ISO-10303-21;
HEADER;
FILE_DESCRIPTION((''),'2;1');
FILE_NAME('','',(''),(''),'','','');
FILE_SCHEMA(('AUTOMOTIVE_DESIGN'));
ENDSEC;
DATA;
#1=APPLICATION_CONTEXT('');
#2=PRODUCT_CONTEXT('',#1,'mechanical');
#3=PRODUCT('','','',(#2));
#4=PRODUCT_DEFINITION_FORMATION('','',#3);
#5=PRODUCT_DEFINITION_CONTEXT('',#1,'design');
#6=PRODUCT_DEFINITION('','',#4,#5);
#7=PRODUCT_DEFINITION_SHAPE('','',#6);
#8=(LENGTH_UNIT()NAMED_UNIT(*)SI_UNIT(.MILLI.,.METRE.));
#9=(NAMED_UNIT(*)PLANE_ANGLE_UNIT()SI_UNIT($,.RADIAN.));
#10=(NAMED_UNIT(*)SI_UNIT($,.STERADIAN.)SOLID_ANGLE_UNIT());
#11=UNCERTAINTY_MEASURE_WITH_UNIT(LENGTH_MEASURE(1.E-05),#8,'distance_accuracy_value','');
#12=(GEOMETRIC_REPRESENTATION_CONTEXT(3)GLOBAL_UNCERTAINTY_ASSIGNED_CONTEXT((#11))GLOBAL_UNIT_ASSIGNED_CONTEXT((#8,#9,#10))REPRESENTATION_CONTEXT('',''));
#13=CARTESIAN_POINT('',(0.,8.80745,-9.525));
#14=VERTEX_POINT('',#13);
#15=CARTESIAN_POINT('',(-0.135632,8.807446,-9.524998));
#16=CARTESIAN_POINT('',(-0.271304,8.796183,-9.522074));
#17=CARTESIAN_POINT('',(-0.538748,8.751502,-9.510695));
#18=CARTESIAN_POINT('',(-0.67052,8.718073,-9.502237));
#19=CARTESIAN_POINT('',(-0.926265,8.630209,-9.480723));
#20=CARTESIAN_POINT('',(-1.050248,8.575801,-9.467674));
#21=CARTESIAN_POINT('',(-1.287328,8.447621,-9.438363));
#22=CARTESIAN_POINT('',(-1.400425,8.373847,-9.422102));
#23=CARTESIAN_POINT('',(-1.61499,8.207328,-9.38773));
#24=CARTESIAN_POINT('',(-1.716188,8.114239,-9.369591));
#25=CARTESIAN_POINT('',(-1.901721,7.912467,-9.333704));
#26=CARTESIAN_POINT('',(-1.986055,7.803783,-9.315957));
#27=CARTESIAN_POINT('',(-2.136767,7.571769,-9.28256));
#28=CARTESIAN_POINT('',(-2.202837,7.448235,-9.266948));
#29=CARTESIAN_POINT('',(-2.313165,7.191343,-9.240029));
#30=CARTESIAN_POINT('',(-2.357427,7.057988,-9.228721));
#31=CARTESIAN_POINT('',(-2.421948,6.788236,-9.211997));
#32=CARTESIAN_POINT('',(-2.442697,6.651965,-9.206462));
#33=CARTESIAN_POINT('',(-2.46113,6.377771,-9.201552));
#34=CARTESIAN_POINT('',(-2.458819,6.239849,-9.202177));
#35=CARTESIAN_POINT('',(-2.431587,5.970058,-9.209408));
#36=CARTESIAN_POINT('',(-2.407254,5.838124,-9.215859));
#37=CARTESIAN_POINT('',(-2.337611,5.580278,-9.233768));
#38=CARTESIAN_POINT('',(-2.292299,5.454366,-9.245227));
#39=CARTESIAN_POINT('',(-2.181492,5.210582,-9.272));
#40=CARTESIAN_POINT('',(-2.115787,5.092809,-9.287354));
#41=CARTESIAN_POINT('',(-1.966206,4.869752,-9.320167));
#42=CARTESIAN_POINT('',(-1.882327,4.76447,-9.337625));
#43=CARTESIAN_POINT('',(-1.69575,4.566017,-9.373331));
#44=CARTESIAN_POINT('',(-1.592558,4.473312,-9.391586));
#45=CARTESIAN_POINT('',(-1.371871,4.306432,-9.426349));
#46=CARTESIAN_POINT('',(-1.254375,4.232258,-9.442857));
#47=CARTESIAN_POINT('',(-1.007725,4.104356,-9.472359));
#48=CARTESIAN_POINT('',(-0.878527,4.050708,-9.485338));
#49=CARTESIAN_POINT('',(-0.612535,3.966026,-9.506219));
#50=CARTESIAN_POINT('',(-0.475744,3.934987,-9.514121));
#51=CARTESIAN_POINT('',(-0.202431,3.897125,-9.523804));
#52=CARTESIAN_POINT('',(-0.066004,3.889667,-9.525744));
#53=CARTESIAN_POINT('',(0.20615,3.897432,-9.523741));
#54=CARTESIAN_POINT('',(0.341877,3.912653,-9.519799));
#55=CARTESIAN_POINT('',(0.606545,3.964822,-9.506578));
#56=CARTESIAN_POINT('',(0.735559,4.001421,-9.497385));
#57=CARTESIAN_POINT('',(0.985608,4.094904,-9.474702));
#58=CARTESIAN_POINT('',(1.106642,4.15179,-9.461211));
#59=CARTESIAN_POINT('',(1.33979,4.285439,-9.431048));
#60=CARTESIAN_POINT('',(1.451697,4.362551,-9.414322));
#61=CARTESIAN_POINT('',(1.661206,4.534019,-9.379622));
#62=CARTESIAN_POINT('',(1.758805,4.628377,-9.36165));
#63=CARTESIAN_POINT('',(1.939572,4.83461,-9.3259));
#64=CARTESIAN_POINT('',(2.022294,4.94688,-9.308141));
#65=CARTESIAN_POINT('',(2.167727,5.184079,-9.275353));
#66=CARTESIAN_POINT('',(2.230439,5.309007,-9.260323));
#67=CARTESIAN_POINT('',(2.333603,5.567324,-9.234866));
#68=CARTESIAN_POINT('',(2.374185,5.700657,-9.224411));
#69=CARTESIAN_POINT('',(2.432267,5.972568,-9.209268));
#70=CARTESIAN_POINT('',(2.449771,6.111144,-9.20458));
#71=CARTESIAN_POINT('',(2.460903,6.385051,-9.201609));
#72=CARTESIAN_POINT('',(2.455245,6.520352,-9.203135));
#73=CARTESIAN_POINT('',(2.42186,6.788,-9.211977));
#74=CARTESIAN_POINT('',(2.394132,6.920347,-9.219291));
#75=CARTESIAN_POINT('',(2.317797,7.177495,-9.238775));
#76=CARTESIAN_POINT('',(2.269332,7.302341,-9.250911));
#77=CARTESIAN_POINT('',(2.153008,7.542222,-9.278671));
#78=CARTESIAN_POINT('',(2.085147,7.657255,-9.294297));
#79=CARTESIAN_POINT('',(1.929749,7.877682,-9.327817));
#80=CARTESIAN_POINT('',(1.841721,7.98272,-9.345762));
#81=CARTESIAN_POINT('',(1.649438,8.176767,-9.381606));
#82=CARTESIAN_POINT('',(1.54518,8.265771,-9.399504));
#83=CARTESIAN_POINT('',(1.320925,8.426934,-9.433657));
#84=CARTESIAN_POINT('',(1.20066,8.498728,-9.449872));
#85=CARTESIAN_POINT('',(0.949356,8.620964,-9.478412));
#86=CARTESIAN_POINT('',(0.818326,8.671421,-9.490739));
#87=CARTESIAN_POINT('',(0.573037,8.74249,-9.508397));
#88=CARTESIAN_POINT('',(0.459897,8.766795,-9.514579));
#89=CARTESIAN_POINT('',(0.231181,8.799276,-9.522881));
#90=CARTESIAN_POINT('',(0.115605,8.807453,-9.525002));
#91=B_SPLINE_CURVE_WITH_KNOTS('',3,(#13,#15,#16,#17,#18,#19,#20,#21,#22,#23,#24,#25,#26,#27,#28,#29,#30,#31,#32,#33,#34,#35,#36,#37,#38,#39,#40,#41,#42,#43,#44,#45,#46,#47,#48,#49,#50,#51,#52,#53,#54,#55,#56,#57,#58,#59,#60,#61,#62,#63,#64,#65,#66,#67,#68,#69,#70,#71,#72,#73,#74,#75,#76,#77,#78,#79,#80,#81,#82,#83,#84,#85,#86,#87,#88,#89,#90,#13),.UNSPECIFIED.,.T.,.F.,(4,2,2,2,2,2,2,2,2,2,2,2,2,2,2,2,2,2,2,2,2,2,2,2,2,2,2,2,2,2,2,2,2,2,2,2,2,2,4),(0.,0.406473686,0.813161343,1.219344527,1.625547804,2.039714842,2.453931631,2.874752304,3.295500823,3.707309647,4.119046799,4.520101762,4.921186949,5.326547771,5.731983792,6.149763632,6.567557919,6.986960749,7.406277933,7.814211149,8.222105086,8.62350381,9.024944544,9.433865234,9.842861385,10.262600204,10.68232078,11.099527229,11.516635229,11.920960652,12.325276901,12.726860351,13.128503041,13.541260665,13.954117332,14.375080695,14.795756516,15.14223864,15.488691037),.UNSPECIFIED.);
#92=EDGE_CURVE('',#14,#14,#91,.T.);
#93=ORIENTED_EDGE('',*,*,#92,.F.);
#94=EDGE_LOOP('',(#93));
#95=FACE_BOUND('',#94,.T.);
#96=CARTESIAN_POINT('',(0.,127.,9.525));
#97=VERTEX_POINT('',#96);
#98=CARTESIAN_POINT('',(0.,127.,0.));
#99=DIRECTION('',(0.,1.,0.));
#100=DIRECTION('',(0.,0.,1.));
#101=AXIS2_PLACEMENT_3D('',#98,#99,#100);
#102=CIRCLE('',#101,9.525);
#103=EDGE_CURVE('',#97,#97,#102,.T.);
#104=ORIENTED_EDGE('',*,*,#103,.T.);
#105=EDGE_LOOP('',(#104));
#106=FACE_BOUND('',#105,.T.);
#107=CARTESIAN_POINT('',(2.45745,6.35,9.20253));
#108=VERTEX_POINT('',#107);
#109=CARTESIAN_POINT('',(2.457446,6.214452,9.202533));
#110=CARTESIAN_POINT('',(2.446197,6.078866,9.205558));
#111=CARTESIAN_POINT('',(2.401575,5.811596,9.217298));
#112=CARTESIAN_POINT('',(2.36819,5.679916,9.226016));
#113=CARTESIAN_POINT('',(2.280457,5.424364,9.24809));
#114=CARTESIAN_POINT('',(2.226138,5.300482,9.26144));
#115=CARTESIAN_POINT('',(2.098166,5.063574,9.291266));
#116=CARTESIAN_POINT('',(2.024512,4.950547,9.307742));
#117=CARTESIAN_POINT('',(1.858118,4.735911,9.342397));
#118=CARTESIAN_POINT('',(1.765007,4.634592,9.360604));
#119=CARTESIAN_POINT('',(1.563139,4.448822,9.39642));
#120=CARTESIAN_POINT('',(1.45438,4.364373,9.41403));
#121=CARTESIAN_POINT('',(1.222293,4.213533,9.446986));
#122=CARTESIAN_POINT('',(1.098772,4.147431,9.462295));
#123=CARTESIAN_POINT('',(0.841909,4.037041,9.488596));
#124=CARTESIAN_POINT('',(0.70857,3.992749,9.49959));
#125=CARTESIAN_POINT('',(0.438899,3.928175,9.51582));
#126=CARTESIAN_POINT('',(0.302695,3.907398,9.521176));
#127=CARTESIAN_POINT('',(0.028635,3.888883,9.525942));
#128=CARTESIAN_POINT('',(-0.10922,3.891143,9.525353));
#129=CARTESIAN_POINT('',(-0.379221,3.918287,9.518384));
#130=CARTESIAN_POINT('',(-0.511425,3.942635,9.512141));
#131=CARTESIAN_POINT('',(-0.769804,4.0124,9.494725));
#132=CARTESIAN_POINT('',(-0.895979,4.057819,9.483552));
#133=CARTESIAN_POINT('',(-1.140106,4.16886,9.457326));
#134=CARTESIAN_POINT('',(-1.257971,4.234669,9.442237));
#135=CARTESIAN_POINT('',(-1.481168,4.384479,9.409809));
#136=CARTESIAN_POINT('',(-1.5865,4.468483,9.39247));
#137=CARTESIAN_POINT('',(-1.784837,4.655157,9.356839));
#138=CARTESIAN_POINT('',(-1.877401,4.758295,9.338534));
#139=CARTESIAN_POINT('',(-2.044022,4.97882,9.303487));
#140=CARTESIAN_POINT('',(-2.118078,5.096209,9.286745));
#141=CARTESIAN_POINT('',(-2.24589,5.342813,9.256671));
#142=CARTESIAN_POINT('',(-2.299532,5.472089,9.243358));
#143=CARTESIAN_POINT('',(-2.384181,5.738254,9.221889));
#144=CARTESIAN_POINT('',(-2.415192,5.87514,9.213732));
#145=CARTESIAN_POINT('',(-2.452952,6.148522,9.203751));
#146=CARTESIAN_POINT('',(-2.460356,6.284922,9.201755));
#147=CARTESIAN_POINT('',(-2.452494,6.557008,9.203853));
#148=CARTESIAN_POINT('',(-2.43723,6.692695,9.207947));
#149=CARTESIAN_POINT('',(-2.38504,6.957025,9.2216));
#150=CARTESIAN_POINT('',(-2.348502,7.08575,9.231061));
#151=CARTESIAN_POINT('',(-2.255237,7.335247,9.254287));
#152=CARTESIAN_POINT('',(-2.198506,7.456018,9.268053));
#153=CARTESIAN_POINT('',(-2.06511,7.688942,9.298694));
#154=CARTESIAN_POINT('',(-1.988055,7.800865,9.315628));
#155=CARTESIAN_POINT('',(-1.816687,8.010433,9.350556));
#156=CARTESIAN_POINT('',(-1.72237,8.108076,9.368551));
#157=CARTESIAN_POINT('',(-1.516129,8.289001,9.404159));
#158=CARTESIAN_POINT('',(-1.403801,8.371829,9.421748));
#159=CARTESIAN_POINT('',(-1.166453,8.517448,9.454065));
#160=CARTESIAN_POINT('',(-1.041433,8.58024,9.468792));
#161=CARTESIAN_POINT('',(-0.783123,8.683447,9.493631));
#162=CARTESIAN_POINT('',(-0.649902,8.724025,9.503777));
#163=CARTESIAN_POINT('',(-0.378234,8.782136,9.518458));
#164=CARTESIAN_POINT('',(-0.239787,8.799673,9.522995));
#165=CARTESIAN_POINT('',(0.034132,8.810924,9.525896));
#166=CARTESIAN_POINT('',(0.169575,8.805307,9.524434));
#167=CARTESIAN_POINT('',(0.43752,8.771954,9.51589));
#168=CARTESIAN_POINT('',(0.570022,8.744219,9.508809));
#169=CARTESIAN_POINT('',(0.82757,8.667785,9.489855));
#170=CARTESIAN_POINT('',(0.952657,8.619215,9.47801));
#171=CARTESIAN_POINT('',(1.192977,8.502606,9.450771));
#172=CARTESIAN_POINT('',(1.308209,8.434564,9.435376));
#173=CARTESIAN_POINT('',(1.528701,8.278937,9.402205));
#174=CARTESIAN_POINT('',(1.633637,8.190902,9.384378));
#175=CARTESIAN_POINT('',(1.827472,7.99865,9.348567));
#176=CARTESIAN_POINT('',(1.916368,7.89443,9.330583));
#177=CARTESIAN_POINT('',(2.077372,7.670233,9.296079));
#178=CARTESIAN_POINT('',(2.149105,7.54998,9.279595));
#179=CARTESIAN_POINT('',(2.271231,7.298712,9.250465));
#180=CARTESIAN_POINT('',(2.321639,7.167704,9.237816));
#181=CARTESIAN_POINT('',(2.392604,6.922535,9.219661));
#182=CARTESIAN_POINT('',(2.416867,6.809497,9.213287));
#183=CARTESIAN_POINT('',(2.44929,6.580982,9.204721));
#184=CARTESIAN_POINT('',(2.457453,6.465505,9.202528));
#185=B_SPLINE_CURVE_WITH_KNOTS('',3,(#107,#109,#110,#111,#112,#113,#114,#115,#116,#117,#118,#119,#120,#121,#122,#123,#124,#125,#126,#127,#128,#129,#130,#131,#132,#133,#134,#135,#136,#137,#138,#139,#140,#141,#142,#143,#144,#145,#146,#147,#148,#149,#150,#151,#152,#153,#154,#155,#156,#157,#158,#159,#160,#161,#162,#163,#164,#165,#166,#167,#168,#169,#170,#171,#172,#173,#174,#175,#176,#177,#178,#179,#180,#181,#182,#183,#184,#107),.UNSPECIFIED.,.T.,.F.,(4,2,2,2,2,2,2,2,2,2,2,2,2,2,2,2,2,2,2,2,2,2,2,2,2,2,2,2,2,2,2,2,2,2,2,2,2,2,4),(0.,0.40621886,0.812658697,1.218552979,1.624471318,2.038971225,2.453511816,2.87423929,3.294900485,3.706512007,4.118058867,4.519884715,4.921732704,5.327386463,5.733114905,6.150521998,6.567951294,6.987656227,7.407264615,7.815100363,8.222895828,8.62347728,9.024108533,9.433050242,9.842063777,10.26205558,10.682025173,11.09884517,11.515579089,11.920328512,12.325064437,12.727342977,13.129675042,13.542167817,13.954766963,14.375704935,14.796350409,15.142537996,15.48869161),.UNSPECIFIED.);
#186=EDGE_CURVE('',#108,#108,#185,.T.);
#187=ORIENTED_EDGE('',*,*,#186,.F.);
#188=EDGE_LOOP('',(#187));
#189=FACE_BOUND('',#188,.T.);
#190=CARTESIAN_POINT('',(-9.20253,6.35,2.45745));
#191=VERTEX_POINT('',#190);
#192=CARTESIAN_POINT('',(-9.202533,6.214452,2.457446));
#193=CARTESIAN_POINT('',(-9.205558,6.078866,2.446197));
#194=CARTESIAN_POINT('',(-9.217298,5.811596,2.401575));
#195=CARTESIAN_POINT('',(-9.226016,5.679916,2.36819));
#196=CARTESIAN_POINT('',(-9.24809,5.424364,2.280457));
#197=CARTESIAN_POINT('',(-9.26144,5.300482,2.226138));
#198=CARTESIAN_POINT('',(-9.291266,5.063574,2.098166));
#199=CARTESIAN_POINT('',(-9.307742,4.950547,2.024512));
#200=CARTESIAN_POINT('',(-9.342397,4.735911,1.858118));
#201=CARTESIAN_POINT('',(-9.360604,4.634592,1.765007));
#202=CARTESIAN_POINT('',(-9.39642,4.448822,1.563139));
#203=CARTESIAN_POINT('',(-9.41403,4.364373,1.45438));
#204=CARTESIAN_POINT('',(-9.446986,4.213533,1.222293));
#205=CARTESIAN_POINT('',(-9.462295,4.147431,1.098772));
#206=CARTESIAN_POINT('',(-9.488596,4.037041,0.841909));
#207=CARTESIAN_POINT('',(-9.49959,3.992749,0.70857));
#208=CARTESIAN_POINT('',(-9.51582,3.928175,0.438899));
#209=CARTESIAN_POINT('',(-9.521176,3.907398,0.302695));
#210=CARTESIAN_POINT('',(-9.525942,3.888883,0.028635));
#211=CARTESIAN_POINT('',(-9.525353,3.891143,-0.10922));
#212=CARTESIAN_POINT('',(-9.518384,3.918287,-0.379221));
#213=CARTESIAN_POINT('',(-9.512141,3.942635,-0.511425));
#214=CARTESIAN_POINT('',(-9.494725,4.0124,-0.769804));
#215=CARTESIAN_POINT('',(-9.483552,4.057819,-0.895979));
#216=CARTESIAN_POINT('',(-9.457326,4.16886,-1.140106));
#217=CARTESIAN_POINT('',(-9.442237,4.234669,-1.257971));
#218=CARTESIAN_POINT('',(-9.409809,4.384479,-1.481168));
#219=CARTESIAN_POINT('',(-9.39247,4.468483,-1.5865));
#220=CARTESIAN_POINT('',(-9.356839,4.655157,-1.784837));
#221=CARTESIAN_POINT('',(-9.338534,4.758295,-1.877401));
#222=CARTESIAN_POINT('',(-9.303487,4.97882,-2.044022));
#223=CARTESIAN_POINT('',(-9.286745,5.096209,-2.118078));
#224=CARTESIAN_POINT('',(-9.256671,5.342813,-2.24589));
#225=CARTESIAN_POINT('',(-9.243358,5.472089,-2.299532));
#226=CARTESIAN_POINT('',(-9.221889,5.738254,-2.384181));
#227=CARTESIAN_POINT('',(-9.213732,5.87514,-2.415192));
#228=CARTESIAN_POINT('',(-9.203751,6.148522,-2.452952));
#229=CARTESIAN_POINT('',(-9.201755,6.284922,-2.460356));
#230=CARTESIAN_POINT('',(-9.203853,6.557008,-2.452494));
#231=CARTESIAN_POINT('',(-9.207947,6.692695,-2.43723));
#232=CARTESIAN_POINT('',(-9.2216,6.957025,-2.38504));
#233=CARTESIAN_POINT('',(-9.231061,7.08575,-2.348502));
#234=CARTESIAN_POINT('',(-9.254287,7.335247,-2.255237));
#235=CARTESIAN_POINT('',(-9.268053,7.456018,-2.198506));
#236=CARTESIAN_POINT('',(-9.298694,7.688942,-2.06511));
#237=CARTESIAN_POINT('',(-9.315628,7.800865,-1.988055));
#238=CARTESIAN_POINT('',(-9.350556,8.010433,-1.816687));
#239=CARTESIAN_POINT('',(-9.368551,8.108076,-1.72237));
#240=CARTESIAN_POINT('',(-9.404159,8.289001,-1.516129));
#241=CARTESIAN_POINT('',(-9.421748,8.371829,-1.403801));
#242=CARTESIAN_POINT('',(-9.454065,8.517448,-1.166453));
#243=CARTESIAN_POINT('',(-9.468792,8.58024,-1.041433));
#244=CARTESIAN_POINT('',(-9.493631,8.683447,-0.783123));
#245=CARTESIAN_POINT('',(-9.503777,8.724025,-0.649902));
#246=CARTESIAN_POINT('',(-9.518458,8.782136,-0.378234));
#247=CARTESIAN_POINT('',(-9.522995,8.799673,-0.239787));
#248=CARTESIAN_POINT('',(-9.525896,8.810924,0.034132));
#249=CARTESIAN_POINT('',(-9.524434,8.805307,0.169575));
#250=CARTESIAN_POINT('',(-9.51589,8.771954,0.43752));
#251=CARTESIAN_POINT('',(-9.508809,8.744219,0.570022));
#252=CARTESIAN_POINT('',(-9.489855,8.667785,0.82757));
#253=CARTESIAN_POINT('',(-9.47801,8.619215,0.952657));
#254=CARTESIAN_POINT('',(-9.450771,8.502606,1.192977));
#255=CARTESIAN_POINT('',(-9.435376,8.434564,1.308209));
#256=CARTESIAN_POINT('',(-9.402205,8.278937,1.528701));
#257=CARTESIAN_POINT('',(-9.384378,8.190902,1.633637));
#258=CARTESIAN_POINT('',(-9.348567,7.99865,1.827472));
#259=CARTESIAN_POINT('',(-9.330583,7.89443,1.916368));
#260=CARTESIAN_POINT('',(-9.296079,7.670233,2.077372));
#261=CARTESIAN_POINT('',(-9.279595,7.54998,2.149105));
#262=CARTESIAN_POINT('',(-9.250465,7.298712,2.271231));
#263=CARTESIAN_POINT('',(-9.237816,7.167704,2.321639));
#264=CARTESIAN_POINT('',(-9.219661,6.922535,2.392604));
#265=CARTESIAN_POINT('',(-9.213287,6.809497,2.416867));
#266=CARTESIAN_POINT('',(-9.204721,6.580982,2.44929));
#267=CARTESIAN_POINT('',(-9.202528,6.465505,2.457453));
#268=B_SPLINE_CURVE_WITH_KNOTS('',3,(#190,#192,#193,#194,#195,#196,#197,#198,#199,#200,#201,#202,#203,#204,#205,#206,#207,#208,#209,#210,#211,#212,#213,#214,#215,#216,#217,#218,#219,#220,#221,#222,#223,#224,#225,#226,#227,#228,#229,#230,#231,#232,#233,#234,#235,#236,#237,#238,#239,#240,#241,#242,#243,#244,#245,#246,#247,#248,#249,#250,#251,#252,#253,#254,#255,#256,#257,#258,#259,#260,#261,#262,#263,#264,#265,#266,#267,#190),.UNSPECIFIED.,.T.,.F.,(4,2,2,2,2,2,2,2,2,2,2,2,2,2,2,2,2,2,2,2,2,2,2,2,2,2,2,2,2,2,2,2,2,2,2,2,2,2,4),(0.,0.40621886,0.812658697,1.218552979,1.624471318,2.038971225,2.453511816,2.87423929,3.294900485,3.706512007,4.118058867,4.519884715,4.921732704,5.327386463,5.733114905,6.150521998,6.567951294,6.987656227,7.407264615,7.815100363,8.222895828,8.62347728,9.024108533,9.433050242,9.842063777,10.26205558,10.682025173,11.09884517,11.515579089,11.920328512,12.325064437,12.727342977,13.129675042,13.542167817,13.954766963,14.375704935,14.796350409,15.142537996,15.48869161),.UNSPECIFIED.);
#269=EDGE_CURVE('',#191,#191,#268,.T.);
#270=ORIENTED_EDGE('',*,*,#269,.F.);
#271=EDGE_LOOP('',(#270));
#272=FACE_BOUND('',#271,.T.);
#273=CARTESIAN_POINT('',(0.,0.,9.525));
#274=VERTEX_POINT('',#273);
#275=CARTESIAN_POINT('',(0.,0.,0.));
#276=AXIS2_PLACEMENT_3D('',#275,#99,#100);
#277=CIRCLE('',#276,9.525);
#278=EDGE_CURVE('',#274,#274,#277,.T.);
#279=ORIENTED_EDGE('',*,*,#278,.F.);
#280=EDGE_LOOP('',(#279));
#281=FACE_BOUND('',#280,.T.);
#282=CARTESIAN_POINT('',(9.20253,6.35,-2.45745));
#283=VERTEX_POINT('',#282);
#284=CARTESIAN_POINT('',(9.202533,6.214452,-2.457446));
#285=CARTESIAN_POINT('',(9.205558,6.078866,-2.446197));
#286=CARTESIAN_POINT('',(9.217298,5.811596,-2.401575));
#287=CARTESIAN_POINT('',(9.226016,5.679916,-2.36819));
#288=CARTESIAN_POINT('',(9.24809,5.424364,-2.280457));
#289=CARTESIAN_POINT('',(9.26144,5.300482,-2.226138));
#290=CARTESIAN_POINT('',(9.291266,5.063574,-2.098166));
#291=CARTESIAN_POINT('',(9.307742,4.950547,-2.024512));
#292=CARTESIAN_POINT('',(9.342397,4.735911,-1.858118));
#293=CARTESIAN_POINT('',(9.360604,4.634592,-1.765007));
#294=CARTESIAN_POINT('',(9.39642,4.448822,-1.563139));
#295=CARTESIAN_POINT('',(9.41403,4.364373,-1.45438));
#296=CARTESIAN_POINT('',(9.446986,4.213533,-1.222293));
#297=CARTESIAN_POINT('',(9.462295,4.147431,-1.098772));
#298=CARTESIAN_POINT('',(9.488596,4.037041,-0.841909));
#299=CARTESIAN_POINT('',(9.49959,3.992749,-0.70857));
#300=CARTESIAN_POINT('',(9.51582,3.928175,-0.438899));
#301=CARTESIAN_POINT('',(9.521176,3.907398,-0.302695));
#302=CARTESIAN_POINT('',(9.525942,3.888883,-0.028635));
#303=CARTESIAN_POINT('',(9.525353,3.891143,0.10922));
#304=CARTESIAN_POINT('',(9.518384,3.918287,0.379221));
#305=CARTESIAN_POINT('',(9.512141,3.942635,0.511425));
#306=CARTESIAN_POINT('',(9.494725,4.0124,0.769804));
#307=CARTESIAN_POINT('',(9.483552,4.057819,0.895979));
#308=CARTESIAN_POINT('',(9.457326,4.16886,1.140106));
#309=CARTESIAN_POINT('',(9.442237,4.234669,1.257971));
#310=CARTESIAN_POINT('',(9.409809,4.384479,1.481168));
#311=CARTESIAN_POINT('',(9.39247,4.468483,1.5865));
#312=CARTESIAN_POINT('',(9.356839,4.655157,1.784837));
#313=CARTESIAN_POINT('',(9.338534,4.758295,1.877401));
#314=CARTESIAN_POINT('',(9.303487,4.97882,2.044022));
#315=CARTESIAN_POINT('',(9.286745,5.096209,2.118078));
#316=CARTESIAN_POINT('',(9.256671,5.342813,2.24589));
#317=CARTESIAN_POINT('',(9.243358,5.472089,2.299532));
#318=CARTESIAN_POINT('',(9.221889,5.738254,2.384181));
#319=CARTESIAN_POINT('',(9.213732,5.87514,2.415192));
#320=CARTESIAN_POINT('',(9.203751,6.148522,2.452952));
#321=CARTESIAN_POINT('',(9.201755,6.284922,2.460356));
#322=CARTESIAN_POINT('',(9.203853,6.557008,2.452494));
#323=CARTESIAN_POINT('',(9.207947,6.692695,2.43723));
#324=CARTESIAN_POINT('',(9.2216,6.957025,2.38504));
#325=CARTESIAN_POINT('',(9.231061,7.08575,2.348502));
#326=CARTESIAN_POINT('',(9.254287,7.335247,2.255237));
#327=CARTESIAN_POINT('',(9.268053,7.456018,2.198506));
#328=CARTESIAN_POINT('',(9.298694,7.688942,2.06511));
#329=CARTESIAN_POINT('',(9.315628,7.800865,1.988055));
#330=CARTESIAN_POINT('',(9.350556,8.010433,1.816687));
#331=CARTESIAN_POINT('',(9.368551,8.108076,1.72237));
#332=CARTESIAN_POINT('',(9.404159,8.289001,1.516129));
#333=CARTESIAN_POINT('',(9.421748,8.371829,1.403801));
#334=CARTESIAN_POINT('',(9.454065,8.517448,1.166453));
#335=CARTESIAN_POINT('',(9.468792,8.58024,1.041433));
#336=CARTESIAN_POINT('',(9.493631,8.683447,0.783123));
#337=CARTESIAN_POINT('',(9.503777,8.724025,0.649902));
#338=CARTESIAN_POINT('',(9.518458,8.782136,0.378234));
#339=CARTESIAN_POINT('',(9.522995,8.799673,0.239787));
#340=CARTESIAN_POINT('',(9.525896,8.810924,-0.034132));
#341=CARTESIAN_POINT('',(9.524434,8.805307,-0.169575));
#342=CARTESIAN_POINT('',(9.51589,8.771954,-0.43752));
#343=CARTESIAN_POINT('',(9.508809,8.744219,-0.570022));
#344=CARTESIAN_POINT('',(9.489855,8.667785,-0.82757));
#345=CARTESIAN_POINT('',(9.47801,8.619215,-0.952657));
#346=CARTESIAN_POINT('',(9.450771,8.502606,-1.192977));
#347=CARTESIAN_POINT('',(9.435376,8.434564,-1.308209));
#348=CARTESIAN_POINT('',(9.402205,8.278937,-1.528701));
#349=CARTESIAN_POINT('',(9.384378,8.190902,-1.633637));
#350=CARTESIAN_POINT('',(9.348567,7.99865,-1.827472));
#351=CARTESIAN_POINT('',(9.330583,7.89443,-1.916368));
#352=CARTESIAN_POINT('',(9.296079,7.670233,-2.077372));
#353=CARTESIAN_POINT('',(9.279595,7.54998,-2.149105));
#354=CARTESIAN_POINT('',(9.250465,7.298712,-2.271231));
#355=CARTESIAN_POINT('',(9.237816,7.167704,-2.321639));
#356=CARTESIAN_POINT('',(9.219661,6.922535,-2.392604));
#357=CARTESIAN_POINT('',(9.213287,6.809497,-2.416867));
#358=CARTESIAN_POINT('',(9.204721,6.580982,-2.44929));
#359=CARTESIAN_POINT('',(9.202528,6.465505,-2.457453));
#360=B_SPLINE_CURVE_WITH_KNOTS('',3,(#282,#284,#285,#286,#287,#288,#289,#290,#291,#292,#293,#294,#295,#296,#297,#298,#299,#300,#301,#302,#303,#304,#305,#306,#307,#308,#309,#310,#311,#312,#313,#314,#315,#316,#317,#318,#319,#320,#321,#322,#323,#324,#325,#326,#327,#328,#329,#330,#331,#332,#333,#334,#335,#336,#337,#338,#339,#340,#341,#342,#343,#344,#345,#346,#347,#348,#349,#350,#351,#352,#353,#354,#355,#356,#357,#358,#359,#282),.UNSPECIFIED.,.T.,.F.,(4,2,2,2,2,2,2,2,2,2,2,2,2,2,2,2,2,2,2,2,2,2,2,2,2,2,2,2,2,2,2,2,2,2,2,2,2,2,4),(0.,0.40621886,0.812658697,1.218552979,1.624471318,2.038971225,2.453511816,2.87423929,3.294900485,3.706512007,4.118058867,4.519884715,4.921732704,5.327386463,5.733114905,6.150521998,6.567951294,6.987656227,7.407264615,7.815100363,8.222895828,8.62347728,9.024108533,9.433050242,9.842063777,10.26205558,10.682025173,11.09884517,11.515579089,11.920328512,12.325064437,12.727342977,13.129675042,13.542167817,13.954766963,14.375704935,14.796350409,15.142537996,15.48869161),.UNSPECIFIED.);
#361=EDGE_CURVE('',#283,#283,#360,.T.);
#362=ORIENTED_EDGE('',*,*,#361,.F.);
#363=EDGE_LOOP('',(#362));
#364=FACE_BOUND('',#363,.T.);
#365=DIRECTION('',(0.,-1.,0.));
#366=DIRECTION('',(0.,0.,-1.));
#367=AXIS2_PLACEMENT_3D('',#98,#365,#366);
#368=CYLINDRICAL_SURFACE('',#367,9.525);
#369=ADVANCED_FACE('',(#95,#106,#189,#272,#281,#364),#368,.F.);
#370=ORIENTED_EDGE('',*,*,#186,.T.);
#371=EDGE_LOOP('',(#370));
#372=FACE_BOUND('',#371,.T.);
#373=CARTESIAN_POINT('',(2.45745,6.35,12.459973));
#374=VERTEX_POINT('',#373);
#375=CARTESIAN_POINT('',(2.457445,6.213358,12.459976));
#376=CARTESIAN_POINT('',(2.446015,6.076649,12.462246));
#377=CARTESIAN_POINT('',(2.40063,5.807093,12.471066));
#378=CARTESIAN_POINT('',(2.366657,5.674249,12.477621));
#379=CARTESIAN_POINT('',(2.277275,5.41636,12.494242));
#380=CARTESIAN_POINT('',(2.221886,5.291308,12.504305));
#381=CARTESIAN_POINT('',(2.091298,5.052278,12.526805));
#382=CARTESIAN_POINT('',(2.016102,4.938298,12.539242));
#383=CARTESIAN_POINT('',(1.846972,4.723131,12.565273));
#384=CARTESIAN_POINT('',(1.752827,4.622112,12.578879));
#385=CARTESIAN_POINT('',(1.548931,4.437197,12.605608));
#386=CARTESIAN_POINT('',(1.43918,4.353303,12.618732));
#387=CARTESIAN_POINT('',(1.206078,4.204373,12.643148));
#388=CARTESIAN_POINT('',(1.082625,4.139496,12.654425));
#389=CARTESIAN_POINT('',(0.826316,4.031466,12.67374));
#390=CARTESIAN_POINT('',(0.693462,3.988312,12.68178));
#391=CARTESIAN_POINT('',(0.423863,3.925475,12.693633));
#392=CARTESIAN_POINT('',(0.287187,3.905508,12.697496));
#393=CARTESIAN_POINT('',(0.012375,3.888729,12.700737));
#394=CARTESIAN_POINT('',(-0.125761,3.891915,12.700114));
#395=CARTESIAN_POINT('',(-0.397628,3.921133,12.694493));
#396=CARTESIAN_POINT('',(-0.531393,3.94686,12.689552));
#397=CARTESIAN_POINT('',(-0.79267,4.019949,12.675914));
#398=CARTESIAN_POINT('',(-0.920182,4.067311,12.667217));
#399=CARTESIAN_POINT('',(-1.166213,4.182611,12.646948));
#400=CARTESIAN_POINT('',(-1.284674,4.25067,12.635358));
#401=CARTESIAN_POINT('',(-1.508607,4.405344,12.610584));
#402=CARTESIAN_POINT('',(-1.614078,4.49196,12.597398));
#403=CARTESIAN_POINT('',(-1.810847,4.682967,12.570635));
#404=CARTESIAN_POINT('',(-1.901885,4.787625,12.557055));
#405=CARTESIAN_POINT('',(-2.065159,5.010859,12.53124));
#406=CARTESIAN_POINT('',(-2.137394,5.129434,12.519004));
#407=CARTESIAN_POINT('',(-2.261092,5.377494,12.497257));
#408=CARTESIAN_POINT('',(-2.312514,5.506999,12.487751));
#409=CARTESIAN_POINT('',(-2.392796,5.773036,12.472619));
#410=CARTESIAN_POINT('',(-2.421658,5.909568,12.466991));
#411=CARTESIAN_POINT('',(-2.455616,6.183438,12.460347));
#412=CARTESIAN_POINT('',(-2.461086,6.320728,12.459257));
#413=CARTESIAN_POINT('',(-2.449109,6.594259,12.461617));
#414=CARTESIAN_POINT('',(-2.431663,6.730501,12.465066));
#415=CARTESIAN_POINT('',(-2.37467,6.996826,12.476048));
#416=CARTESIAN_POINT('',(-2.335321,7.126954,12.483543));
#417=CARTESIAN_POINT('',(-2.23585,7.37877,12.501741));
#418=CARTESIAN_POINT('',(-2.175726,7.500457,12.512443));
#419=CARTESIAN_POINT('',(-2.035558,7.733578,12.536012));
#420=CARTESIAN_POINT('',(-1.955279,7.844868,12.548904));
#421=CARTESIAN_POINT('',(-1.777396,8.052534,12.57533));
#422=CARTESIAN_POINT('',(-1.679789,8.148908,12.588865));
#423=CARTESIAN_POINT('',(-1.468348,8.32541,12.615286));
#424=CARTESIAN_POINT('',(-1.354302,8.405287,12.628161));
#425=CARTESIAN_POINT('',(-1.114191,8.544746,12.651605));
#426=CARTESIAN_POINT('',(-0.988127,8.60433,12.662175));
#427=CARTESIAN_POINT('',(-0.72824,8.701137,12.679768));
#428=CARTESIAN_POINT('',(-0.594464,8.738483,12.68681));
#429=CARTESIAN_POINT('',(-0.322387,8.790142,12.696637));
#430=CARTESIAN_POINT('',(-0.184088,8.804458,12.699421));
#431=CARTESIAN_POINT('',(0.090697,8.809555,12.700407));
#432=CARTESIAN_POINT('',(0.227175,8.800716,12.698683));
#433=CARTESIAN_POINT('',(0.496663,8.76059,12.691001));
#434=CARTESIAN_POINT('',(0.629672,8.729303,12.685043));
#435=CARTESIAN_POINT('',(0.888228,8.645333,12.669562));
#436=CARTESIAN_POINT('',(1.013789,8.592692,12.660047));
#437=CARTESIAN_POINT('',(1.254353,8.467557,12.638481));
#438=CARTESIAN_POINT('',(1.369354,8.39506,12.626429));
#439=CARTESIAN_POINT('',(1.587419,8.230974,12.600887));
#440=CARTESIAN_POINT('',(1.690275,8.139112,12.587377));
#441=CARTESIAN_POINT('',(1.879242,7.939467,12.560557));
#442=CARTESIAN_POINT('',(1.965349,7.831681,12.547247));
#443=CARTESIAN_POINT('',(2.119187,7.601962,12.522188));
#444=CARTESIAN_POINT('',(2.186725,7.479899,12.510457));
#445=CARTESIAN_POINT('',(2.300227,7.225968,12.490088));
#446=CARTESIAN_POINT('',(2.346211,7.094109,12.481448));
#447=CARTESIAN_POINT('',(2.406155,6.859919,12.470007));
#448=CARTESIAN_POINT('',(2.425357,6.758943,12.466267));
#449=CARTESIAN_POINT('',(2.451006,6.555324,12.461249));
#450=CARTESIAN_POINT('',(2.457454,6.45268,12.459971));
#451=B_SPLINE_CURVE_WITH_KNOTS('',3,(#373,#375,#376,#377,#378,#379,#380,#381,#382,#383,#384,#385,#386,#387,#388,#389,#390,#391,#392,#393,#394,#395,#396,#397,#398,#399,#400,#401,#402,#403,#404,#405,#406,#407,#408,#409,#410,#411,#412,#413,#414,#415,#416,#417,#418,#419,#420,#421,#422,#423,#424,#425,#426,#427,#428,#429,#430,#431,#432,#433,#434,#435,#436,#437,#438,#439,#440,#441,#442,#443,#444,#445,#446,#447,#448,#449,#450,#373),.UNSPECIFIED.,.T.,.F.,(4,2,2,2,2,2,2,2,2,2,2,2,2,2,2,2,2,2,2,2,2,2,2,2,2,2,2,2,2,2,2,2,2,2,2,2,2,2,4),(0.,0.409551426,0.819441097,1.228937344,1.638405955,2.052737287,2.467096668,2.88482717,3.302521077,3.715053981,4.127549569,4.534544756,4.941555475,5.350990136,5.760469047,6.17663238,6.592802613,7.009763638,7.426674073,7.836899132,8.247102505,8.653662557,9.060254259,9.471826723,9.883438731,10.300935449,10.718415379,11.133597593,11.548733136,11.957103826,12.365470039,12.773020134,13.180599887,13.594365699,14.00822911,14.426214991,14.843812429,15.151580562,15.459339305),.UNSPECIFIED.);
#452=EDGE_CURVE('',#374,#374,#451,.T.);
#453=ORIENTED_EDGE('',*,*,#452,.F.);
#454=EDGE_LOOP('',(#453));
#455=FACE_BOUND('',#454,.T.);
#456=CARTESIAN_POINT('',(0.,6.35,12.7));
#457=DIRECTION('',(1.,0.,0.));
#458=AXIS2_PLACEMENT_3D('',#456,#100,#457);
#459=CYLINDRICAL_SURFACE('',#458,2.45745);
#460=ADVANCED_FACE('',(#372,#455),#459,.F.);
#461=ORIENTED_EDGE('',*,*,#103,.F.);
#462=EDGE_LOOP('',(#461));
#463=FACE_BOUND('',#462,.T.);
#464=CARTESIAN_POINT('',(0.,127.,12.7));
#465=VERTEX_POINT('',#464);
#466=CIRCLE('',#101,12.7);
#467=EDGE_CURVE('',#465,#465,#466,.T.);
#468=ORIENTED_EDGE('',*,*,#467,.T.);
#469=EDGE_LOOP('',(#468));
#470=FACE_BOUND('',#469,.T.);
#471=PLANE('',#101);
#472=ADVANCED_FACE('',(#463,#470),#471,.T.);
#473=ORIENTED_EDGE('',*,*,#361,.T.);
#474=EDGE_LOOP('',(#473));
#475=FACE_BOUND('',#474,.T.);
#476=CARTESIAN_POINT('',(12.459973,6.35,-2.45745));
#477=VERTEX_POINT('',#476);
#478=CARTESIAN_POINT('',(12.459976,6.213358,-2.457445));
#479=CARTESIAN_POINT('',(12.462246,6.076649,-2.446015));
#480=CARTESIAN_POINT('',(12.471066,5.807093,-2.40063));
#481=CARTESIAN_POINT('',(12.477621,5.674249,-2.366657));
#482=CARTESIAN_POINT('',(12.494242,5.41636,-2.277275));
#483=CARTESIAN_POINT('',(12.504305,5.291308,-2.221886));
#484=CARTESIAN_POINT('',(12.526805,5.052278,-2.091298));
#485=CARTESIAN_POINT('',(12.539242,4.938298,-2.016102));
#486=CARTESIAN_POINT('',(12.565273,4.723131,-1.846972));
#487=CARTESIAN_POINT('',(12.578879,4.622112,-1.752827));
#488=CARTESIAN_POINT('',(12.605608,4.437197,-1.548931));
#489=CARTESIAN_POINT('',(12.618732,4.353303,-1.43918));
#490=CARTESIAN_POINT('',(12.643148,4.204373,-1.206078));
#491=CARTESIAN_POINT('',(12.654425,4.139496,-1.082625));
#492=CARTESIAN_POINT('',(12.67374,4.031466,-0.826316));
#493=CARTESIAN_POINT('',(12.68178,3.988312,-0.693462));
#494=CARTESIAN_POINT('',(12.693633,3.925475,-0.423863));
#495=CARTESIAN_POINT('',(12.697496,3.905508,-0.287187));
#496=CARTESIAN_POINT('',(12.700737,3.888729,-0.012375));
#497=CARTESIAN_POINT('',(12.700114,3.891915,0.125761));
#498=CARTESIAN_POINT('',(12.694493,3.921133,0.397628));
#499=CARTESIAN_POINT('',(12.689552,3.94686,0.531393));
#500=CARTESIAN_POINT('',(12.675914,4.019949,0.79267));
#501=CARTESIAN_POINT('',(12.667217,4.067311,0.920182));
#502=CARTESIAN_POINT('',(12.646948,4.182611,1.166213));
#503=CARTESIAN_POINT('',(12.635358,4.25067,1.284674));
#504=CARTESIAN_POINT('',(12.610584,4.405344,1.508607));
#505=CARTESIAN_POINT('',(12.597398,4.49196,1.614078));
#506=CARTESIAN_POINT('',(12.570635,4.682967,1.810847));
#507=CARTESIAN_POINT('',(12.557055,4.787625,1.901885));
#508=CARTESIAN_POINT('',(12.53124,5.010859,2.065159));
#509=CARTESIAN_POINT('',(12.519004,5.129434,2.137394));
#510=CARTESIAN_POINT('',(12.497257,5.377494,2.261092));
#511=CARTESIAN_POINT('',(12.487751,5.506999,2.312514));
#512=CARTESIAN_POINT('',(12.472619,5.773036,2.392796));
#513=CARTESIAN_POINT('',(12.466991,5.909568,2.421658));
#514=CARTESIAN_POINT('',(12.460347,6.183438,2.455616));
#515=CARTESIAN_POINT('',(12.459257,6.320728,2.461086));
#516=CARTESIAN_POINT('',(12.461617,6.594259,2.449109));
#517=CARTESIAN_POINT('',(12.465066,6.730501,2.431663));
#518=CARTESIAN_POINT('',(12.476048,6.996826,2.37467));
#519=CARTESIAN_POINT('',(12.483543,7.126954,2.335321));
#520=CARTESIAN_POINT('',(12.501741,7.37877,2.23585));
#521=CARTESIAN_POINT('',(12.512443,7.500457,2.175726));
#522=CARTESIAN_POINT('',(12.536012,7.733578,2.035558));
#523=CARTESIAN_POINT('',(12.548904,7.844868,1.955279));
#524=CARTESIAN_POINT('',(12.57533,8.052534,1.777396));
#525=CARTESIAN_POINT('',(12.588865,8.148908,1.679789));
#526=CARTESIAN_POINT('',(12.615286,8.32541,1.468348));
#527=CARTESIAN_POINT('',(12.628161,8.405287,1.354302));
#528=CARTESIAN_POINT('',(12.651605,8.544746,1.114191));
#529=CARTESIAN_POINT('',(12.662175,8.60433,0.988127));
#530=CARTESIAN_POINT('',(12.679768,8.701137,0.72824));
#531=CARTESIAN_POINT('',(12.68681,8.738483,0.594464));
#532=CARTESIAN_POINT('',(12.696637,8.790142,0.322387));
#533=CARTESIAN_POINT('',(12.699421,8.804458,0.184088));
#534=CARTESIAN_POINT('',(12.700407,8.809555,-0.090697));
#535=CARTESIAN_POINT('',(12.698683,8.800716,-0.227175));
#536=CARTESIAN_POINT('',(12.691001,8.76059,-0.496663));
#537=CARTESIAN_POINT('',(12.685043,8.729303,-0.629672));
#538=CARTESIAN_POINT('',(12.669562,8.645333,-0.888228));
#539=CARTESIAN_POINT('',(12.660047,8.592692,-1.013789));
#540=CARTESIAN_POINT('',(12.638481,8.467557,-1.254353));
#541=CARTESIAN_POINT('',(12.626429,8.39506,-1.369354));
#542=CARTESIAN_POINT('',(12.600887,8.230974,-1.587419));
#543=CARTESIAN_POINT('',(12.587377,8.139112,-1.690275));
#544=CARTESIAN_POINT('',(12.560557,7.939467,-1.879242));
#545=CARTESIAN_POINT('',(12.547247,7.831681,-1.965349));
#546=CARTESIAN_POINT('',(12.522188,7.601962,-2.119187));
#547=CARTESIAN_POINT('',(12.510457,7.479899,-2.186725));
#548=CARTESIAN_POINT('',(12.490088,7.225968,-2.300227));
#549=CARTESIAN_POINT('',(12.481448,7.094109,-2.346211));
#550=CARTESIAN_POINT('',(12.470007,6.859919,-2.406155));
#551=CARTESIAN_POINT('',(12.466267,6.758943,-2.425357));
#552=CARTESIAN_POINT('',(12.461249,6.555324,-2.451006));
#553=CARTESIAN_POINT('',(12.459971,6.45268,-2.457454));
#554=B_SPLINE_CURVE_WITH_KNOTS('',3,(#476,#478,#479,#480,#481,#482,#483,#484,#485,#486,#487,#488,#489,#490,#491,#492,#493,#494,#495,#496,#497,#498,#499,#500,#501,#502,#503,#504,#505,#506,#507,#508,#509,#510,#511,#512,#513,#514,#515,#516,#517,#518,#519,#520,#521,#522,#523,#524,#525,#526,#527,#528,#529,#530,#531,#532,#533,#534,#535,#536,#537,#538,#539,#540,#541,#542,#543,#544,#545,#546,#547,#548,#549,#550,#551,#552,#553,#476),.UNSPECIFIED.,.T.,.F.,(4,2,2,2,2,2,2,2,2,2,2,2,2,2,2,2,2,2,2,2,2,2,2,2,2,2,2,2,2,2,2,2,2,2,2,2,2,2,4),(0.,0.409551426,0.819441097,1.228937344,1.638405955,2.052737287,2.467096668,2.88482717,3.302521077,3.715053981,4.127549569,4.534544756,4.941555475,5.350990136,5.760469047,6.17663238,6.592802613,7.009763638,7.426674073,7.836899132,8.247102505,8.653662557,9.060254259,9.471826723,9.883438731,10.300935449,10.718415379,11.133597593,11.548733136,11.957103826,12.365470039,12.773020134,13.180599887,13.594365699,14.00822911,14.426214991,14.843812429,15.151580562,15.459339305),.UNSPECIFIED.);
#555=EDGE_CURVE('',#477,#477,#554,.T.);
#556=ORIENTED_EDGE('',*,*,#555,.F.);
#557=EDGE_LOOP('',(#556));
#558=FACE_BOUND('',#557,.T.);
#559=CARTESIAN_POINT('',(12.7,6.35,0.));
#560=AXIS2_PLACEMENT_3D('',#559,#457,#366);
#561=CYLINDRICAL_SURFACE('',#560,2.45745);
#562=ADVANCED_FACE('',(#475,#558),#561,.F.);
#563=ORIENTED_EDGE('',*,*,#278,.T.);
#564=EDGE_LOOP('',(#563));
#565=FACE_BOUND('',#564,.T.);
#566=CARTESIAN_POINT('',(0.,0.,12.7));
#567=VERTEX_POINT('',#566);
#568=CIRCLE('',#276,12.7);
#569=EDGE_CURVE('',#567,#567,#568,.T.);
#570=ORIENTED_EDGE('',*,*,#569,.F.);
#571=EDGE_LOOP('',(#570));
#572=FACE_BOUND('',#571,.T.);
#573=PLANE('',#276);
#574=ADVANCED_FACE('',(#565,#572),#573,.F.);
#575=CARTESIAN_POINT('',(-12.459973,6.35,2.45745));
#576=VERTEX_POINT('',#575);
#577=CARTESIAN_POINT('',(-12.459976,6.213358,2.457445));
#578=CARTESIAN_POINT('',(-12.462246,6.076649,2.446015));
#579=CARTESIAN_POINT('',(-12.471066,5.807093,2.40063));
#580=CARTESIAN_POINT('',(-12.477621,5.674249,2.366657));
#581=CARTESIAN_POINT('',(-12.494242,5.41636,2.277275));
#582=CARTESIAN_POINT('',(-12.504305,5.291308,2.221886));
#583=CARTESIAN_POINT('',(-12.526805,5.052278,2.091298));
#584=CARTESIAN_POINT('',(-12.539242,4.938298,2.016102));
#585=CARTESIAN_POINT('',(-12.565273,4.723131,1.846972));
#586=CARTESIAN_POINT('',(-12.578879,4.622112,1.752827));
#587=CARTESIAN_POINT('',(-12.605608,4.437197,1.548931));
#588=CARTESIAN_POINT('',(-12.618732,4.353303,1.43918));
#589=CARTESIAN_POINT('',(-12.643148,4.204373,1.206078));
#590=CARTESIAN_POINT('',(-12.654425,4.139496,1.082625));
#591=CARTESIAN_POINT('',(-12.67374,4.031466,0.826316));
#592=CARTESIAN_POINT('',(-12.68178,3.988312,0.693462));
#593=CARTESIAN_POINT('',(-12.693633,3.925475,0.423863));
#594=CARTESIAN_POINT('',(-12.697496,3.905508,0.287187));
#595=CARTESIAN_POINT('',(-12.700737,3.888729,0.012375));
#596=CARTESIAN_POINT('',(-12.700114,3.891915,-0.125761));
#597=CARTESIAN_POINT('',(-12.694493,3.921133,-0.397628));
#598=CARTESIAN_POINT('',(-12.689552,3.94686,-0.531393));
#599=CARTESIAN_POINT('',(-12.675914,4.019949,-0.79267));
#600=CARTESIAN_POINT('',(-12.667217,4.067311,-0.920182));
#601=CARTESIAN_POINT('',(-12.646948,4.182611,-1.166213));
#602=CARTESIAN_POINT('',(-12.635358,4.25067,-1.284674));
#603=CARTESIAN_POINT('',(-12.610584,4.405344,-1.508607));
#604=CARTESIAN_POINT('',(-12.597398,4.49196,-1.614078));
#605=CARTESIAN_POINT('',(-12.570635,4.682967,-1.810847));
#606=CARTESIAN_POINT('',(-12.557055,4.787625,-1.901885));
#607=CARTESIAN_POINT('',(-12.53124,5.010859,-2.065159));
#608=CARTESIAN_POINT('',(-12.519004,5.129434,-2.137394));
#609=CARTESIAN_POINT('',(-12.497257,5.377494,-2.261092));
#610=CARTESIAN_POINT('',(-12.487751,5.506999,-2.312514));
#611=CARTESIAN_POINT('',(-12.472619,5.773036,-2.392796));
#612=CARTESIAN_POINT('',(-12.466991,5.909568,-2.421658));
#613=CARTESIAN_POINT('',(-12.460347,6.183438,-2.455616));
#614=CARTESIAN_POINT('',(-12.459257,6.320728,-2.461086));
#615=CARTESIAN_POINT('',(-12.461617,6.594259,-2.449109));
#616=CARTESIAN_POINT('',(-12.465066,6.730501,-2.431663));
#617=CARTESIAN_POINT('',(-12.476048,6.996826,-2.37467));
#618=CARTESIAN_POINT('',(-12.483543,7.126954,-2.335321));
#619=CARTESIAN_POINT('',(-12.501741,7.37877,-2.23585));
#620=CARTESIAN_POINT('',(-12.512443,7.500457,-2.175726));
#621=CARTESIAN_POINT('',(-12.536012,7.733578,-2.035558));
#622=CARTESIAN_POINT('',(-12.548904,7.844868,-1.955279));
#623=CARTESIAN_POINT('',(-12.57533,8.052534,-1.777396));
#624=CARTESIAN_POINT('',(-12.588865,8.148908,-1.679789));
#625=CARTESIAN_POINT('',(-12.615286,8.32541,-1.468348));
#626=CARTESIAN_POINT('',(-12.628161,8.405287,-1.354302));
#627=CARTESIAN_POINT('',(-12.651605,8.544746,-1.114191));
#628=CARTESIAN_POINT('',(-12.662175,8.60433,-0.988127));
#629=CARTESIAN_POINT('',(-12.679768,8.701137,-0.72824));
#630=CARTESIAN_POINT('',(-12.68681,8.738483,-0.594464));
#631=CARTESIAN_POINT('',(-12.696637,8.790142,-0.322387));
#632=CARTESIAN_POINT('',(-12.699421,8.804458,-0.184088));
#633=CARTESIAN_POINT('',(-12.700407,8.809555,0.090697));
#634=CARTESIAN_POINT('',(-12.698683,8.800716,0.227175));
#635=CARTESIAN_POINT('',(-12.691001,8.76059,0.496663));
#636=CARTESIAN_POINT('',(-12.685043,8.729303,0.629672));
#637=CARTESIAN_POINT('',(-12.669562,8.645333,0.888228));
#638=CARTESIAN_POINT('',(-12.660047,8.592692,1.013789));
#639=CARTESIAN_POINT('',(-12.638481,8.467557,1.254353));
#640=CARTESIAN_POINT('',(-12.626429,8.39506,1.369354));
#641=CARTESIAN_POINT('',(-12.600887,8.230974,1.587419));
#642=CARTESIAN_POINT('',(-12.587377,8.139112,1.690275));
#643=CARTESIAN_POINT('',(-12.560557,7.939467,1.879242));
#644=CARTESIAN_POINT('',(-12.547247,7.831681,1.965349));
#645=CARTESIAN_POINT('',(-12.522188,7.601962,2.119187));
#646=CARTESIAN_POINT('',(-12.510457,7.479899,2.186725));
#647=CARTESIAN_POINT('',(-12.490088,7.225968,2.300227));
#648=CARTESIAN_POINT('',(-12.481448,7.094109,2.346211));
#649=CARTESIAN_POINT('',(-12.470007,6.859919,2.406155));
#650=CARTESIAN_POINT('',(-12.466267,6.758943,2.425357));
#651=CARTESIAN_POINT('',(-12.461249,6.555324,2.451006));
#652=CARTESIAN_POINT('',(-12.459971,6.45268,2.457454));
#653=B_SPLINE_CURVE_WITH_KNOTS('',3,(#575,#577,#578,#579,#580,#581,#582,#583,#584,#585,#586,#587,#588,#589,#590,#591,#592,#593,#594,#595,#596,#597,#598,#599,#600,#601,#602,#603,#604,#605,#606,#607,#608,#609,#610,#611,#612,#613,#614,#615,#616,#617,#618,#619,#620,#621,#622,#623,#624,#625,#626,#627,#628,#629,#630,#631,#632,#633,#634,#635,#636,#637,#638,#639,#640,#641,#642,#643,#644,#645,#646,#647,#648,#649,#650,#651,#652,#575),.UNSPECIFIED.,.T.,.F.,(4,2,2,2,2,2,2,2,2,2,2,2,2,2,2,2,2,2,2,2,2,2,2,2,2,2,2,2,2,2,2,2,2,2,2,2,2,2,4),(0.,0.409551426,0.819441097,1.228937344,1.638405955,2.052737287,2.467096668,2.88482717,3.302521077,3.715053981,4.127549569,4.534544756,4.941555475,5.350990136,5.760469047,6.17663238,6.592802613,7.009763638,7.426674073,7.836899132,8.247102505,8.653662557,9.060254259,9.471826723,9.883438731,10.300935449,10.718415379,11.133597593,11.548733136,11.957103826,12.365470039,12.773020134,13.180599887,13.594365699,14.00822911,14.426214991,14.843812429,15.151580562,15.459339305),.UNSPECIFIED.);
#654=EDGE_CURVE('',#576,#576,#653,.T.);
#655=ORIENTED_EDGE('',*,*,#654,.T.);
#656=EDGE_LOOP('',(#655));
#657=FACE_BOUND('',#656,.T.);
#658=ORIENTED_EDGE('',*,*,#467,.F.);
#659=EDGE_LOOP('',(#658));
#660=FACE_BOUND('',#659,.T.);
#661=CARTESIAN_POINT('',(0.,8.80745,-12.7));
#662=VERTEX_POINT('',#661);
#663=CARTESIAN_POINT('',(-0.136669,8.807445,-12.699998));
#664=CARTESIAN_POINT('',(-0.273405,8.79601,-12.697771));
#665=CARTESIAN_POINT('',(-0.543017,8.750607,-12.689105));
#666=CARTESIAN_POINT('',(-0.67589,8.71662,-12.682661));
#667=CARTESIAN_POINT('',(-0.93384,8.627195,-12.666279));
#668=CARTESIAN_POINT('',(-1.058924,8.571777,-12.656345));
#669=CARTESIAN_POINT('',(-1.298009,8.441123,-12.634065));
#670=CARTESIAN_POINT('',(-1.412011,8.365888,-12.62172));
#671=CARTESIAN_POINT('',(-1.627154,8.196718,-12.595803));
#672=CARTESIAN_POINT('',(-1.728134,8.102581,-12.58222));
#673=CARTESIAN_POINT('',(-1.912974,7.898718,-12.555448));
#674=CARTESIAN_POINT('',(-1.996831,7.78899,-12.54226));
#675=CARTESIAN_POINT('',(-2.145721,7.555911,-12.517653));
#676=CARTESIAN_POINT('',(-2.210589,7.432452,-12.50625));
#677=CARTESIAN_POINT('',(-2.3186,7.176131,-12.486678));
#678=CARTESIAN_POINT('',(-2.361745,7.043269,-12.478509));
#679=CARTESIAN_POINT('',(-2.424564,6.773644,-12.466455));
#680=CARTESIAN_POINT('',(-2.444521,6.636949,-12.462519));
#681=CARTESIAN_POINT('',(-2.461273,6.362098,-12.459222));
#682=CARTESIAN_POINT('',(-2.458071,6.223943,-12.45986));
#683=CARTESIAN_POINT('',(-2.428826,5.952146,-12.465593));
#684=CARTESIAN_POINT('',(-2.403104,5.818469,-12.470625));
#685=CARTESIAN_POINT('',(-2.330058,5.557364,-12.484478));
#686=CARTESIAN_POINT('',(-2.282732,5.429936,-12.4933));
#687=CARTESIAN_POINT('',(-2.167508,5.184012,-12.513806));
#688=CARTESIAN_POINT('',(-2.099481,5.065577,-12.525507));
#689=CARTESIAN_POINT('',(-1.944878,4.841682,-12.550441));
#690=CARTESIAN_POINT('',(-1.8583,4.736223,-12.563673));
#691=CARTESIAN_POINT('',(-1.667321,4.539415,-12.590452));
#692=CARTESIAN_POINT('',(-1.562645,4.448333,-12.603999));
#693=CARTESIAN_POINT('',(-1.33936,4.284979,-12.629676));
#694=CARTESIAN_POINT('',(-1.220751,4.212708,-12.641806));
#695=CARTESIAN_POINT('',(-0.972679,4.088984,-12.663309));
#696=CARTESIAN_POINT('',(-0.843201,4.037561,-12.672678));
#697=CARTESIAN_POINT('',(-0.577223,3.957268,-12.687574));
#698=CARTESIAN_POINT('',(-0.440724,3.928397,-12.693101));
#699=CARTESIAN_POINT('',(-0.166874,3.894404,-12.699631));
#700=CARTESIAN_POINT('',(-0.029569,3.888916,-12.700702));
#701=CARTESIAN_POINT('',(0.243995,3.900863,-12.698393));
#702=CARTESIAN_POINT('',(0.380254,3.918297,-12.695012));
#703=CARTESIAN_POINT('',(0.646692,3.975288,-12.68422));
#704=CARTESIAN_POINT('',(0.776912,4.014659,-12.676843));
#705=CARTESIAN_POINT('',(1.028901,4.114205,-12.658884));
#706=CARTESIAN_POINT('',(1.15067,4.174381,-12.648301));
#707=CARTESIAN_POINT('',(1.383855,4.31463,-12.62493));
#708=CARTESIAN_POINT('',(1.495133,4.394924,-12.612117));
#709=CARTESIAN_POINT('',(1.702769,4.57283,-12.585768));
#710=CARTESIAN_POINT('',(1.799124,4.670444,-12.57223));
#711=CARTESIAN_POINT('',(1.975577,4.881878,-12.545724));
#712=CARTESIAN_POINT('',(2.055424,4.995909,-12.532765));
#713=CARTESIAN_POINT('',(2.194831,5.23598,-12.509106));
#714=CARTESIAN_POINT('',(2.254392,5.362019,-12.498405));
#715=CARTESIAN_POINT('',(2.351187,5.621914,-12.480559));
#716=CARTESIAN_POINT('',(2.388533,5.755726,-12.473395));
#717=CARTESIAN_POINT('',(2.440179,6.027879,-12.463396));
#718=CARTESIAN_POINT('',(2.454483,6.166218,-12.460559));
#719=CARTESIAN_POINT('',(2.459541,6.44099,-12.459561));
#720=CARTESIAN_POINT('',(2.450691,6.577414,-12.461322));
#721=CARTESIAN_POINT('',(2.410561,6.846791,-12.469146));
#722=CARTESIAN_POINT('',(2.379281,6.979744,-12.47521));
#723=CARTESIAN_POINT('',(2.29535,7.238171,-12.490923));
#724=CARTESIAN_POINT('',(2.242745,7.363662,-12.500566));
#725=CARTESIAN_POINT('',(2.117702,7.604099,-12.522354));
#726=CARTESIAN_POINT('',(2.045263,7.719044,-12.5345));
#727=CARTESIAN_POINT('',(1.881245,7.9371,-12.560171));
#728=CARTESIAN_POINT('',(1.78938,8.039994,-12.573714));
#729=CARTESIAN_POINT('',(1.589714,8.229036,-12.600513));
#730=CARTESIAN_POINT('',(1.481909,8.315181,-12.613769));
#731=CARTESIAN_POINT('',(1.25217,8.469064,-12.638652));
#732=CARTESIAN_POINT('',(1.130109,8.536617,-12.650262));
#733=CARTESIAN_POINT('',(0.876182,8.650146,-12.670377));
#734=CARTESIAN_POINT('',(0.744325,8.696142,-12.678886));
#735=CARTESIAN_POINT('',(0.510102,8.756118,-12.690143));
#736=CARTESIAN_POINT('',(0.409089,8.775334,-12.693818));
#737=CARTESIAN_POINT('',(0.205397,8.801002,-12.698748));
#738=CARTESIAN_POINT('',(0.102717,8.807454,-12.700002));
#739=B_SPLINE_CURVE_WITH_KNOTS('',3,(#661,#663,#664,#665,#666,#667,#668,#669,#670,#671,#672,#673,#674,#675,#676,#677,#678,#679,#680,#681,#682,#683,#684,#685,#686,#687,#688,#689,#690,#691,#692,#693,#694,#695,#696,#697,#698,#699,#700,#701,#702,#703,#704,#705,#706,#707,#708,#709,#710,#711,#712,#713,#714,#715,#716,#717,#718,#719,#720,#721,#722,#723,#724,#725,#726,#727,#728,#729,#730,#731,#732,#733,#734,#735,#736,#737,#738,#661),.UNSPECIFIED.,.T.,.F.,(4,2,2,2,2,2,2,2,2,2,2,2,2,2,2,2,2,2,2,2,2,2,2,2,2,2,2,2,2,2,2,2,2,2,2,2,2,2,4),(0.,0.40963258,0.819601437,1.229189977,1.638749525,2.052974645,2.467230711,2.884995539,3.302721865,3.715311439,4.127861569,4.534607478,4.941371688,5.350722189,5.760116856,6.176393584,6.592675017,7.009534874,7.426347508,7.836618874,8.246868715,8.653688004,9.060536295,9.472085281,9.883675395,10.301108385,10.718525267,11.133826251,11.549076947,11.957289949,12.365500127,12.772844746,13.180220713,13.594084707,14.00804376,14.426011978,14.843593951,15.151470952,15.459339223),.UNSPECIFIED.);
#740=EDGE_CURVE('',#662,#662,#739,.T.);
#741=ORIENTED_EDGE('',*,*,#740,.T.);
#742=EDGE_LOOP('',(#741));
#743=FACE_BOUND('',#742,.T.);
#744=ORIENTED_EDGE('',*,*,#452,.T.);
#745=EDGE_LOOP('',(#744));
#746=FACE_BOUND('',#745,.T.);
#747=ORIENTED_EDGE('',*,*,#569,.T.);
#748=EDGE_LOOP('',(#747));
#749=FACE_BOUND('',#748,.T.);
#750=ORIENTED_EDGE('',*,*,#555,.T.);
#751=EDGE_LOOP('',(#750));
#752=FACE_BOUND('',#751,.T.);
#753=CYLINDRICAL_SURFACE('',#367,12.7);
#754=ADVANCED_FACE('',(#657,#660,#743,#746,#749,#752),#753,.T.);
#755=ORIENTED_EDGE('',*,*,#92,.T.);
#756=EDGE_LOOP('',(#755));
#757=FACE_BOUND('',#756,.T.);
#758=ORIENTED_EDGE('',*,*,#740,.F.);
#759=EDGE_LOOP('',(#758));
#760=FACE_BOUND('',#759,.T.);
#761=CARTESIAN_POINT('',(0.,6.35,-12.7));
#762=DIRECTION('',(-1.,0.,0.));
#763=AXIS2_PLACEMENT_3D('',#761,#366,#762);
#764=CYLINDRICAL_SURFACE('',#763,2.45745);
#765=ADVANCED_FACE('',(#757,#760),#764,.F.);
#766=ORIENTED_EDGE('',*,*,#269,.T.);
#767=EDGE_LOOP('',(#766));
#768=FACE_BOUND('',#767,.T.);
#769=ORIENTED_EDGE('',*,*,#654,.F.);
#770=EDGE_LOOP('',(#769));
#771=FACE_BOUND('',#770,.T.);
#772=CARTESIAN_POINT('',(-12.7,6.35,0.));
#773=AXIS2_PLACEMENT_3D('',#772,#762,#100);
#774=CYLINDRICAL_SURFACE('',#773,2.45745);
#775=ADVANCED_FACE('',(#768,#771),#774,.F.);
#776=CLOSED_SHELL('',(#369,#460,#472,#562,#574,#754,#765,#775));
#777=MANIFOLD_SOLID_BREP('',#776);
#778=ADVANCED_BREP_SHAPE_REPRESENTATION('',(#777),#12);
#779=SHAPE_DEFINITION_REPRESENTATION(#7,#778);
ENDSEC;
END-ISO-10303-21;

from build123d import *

# Parameters (mm, degrees)
SKETCH1_R          = 12.7
SKETCH1_R_2        = 9.525
ELTUBO_DEPTH       = 127
SETSCREW_OUTLINE_W = 2.45745
SETSCREW_OUTLINE_H = 3.497687322
CIRPATTERN1_COUNT  = 4


# Read off the part's stored shape, not the designer's step: SetScrew
with BuildPart() as part:
    # Sketch1 → ElTubo (new body)
    with BuildSketch(Plane(origin=(0, 0, 0), x_dir=(1, 0, 0), z_dir=(0, 1, 0))):
        with Locations(Location((0, 0, 0), (0, 0, 270))):
            Circle(SKETCH1_R)
        with Locations(Location((0, 0, 0), (0, 0, 270))):
            Circle(SKETCH1_R_2, mode=Mode.SUBTRACT)
    extrude(amount=ELTUBO_DEPTH)

    # SetScrew outline → SetScrew (revolve, cut)
    with BuildSketch(Plane(origin=(0, 6.35, 0), x_dir=(0, 1, 0), z_dir=(0, 0, -1))):
        with Locations((1.228725, -10.951191646)):
            Rectangle(SETSCREW_OUTLINE_W, SETSCREW_OUTLINE_H)
    setscrew = revolve(axis=Axis((0, 6.35, 0), (1, 0, 0)), mode=Mode.SUBTRACT)

    # CirPattern1: SetScrew ×4 about axis
    cirpattern1_axis = Axis((0, 127, 0), (0, -1, 0))
    for i in range(1, CIRPATTERN1_COUNT):
        add(setscrew.rotate(cirpattern1_axis, i * 360 / CIRPATTERN1_COUNT), mode=Mode.SUBTRACT)


solid = part.part
